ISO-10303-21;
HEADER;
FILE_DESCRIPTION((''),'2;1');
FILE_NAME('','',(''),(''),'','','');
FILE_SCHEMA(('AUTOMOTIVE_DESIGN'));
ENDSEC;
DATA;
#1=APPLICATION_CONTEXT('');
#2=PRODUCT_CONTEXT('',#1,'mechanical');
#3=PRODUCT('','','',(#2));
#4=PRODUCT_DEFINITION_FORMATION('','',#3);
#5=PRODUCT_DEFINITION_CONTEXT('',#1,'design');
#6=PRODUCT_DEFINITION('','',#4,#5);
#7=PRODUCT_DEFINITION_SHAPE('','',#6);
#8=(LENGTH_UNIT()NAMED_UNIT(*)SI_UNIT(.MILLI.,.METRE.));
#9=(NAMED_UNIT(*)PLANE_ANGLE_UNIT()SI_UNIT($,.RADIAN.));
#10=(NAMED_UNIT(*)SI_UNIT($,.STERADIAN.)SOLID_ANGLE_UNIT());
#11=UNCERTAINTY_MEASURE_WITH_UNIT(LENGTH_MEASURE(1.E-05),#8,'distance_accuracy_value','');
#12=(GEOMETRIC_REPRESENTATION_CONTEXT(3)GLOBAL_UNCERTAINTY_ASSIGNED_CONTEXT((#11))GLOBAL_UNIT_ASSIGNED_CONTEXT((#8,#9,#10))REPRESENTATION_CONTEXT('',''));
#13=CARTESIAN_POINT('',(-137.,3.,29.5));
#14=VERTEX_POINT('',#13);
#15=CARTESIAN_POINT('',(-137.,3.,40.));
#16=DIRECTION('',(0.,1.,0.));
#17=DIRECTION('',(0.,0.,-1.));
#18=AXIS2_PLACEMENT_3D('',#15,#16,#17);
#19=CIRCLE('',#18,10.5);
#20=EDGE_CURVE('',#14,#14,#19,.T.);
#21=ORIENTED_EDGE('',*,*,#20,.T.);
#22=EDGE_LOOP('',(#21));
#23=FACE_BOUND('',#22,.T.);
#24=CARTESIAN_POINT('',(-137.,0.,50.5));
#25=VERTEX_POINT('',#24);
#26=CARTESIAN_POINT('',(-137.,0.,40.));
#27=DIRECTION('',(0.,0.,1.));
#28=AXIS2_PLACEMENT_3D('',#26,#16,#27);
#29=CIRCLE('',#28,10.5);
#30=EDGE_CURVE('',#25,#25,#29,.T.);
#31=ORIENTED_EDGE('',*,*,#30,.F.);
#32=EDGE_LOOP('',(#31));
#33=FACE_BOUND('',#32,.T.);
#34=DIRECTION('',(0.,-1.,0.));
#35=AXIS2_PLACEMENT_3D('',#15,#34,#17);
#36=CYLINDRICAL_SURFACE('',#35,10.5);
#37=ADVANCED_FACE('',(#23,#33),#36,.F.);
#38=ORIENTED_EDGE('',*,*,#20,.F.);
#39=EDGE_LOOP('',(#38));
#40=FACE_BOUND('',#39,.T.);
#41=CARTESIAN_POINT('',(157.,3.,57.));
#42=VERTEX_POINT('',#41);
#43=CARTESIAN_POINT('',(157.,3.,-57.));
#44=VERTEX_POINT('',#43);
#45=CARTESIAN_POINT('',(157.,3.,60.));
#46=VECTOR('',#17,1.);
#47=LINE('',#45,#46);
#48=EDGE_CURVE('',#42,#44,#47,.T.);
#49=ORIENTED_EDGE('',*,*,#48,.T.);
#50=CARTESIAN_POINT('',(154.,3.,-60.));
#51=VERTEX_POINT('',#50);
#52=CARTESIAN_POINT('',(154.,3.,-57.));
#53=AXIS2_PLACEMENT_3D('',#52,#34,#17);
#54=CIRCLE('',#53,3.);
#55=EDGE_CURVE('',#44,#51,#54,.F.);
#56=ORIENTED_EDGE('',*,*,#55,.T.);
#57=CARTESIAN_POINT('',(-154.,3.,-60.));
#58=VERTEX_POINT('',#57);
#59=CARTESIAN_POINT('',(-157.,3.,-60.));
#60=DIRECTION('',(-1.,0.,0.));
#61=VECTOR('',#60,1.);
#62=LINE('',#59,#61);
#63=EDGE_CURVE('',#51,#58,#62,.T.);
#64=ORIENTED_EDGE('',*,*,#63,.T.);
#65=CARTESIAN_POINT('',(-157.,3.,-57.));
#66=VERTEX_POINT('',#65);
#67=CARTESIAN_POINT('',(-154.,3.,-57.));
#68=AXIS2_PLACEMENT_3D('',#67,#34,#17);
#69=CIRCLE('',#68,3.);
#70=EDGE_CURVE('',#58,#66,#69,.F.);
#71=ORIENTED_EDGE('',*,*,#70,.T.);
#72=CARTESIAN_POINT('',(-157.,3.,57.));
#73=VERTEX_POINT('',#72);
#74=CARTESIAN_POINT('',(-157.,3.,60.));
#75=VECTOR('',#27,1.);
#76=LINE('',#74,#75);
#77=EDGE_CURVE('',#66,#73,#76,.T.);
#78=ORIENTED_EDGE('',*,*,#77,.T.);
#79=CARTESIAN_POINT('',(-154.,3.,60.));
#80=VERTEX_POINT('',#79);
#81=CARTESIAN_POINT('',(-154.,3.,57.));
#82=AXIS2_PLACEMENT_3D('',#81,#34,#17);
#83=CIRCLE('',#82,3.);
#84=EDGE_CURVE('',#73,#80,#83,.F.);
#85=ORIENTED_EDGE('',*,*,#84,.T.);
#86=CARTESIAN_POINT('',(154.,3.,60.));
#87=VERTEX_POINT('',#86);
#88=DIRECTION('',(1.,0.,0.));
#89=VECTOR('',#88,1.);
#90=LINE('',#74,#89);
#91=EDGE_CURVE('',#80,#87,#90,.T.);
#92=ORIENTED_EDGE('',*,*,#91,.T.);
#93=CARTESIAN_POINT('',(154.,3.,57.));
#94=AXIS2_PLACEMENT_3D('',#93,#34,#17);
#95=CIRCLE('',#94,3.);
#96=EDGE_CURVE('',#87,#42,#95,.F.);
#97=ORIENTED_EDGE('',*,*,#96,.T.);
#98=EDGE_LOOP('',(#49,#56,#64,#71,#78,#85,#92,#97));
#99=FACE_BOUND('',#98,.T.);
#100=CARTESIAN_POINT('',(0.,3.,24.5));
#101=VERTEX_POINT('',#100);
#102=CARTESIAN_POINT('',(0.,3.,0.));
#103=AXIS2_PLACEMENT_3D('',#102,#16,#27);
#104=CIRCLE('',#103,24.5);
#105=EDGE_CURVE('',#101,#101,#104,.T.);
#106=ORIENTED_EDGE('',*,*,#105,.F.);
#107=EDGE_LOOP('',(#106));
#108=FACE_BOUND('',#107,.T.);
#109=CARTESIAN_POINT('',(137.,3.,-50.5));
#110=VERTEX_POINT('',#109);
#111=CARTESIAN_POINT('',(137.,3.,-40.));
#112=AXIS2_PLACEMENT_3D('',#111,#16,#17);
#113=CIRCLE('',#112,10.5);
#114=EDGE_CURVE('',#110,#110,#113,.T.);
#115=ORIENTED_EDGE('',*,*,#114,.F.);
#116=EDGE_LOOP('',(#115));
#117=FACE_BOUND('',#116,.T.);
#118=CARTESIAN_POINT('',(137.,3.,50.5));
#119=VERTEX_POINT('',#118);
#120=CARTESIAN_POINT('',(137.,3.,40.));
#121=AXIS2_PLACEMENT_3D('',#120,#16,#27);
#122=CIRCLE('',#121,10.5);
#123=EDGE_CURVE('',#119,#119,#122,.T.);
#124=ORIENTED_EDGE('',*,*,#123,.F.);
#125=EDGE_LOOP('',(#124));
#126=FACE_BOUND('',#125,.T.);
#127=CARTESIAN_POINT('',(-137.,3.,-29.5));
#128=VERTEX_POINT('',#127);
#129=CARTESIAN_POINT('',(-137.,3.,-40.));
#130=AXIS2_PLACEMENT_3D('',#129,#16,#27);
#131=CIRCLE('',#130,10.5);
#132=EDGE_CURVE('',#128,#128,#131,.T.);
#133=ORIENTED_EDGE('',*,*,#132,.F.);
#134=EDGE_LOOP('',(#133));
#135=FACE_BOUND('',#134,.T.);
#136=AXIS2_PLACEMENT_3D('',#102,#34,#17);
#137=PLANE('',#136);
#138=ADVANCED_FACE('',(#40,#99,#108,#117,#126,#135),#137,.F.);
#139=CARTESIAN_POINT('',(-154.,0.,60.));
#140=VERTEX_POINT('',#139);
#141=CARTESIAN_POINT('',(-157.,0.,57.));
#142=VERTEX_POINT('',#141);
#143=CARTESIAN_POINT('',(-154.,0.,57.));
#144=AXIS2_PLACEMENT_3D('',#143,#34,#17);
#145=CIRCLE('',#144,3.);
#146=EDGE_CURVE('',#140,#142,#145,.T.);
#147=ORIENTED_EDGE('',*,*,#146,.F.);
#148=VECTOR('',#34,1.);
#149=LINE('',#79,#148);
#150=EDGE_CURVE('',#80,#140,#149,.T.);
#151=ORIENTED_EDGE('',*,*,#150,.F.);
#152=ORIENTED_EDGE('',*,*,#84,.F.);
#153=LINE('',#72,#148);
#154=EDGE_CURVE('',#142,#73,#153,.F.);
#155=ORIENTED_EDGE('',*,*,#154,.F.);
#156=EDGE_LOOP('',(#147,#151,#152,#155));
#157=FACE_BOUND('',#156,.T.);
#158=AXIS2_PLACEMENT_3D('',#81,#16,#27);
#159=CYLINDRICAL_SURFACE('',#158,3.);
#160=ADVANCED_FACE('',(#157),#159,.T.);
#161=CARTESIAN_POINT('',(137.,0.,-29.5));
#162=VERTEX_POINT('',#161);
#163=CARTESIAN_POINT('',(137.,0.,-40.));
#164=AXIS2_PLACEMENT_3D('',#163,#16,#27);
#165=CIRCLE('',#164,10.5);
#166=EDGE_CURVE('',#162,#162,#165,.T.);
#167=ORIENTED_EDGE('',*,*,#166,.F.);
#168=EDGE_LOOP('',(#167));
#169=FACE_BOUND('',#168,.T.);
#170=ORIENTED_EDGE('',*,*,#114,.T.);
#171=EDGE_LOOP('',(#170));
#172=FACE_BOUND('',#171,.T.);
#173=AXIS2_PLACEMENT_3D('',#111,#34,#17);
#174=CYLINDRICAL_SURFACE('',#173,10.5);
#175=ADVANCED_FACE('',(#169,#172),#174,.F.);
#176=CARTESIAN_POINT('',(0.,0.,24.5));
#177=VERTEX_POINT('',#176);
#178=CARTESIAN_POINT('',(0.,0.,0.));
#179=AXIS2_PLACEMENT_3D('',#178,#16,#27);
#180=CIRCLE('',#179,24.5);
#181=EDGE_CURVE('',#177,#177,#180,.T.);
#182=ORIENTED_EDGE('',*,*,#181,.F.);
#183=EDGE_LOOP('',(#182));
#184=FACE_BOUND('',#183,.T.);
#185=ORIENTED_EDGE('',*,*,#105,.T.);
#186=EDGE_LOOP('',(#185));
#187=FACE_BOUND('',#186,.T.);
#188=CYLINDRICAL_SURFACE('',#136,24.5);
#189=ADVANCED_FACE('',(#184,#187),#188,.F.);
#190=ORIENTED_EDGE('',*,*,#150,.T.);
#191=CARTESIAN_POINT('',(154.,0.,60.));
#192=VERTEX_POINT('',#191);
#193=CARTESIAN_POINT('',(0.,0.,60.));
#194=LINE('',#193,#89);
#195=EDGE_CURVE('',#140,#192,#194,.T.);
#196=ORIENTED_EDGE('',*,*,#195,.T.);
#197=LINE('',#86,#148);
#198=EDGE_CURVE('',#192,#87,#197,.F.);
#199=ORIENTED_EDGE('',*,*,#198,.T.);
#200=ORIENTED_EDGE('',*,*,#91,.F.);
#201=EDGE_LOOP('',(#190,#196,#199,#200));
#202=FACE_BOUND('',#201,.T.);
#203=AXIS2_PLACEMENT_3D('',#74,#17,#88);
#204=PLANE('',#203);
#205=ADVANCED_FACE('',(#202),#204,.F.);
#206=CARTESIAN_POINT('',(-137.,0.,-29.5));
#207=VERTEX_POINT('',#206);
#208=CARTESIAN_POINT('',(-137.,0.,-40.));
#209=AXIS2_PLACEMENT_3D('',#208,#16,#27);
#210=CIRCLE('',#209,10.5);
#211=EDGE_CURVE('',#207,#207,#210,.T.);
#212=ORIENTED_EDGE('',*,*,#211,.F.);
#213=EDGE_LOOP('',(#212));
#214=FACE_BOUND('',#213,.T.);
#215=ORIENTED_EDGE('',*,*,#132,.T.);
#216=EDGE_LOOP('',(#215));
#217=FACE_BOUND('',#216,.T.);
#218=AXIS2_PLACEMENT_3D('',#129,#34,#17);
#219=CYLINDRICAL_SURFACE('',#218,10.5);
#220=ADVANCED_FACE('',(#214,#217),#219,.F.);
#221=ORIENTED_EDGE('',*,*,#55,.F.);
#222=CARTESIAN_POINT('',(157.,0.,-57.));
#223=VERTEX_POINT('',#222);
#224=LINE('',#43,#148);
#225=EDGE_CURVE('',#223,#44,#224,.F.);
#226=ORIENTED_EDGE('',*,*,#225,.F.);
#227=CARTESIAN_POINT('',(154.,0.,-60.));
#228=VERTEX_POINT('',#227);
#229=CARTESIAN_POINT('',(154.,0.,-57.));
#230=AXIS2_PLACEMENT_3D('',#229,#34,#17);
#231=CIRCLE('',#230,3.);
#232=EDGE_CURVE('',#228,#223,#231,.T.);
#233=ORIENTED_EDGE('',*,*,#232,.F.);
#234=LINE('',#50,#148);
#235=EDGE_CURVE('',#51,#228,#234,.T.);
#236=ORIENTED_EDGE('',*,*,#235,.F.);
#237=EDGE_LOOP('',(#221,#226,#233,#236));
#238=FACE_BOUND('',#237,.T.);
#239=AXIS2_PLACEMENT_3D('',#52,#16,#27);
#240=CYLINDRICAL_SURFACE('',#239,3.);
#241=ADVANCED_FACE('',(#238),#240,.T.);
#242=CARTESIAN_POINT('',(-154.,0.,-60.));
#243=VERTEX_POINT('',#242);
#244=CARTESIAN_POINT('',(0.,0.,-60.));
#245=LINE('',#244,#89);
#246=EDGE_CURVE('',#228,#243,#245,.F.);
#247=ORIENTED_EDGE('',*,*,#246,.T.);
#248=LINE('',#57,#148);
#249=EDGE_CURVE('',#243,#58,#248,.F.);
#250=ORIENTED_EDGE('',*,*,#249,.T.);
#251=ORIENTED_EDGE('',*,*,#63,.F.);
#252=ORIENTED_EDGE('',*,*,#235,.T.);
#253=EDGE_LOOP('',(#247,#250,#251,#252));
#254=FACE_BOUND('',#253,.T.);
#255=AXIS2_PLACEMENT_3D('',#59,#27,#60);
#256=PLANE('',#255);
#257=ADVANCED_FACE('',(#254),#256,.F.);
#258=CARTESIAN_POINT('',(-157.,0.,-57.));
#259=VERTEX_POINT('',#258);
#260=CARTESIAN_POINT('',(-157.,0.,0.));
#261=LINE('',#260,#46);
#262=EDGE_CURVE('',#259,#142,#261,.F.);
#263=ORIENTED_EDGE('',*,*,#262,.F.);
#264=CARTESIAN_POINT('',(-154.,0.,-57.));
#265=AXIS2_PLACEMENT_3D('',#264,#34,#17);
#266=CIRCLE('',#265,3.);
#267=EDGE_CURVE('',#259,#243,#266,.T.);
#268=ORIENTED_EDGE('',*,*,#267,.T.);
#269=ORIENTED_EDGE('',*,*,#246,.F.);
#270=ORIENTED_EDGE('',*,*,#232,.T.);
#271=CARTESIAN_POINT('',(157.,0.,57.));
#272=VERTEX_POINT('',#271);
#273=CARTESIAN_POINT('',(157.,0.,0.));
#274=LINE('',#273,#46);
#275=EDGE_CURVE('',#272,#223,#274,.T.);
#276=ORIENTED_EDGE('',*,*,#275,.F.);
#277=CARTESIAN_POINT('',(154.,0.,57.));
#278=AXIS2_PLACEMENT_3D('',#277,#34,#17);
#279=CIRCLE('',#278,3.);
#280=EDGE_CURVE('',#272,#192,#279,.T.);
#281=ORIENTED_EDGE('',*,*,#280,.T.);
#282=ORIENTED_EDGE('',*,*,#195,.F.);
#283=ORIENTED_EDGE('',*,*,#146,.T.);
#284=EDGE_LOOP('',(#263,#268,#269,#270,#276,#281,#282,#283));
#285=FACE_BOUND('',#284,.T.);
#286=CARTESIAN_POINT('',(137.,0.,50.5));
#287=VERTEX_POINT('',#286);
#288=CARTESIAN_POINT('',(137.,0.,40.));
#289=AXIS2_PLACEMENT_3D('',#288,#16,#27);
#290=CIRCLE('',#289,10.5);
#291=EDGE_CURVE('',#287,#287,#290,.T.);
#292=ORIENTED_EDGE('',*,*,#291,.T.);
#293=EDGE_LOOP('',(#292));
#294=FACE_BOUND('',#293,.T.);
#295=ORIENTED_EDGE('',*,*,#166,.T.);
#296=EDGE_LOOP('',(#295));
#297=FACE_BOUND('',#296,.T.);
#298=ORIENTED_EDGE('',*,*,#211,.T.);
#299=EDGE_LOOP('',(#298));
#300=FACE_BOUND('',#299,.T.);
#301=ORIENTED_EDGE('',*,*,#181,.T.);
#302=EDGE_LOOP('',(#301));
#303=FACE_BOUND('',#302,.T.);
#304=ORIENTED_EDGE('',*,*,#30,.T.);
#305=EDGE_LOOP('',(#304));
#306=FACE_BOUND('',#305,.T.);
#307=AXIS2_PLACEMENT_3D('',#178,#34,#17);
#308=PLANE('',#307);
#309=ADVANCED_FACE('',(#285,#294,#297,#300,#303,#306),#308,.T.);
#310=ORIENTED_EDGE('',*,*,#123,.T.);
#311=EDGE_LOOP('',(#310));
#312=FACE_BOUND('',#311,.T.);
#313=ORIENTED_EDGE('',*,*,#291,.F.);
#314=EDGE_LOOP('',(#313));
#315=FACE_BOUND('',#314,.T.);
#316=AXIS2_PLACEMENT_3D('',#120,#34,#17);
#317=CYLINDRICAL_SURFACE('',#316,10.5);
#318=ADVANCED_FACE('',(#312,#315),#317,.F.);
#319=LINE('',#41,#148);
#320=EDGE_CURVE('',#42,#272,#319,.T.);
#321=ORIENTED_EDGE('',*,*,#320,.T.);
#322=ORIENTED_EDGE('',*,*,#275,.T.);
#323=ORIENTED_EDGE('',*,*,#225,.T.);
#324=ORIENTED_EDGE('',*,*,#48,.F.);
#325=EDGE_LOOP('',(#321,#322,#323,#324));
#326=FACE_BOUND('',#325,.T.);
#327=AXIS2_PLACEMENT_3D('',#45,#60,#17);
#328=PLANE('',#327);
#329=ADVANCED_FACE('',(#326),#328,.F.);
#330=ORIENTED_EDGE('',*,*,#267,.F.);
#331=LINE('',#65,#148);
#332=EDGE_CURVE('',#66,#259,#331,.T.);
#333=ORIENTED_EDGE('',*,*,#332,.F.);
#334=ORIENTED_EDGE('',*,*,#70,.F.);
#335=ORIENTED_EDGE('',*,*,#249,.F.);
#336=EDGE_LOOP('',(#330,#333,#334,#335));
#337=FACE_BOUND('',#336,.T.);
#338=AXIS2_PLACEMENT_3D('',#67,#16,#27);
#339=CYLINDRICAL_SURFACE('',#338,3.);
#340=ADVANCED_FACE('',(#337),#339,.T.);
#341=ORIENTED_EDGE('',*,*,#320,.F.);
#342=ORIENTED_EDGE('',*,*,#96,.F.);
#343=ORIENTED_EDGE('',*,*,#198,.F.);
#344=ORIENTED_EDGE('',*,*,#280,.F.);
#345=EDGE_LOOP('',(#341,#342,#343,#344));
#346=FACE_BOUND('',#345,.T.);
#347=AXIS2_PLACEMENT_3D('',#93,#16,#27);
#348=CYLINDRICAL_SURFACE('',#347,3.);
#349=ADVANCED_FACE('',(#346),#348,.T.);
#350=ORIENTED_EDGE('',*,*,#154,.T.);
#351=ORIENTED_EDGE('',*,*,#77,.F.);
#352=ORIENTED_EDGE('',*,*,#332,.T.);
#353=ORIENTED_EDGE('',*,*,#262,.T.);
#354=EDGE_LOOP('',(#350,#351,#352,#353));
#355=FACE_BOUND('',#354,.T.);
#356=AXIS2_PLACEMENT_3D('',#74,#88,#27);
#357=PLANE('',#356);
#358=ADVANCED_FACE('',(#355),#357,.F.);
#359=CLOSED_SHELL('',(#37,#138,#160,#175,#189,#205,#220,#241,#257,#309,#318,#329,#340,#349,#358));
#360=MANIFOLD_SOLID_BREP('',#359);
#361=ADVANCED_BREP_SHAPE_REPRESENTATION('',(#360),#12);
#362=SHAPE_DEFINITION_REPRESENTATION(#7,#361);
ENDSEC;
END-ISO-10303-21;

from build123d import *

# Parameters (mm, degrees)
SKETCH1_W           = 314
SKETCH1_H           = 120
SKETCH1_R           = 24.5
SKETCH1_R_2         = 10.5
BOSS_EXTRUDE1_DEPTH = 3
FILLET1_R           = 3


with BuildPart() as part:
    # Sketch1 → Boss-Extrude1 (new body)
    with BuildSketch(Plane(origin=(0, 0, 0), x_dir=(1, 0, 0), z_dir=(0, 1, 0))):
        Rectangle(SKETCH1_W, SKETCH1_H)
        with Locations(Location((0, 0, 0), (0, 0, 270))):
            Circle(SKETCH1_R, mode=Mode.SUBTRACT)
        with Locations(Location((-137, 40, 0), (0, 0, 270))):
            Circle(SKETCH1_R_2, mode=Mode.SUBTRACT)
        with Locations(Location((137, 40, 0), (0, 0, 90))):
            Circle(SKETCH1_R_2, mode=Mode.SUBTRACT)
        with Locations(Location((137, -40, 0), (0, 0, 270))):
            Circle(SKETCH1_R_2, mode=Mode.SUBTRACT)
        with Locations(Location((-137, -40, 0), (0, 0, 90))):
            Circle(SKETCH1_R_2, mode=Mode.SUBTRACT)
    extrude(amount=BOSS_EXTRUDE1_DEPTH)

    # Fillet1
    fillet1_edges = [part.edges().sort_by_distance(p)[0] for p in [
        (157, 1.5, -60),
        (157, 1.5, 60),
        (-157, 1.5, 60),
        (-157, 1.5, -60),
    ]]
    fillet(fillet1_edges, radius=FILLET1_R)


solid = part.part
